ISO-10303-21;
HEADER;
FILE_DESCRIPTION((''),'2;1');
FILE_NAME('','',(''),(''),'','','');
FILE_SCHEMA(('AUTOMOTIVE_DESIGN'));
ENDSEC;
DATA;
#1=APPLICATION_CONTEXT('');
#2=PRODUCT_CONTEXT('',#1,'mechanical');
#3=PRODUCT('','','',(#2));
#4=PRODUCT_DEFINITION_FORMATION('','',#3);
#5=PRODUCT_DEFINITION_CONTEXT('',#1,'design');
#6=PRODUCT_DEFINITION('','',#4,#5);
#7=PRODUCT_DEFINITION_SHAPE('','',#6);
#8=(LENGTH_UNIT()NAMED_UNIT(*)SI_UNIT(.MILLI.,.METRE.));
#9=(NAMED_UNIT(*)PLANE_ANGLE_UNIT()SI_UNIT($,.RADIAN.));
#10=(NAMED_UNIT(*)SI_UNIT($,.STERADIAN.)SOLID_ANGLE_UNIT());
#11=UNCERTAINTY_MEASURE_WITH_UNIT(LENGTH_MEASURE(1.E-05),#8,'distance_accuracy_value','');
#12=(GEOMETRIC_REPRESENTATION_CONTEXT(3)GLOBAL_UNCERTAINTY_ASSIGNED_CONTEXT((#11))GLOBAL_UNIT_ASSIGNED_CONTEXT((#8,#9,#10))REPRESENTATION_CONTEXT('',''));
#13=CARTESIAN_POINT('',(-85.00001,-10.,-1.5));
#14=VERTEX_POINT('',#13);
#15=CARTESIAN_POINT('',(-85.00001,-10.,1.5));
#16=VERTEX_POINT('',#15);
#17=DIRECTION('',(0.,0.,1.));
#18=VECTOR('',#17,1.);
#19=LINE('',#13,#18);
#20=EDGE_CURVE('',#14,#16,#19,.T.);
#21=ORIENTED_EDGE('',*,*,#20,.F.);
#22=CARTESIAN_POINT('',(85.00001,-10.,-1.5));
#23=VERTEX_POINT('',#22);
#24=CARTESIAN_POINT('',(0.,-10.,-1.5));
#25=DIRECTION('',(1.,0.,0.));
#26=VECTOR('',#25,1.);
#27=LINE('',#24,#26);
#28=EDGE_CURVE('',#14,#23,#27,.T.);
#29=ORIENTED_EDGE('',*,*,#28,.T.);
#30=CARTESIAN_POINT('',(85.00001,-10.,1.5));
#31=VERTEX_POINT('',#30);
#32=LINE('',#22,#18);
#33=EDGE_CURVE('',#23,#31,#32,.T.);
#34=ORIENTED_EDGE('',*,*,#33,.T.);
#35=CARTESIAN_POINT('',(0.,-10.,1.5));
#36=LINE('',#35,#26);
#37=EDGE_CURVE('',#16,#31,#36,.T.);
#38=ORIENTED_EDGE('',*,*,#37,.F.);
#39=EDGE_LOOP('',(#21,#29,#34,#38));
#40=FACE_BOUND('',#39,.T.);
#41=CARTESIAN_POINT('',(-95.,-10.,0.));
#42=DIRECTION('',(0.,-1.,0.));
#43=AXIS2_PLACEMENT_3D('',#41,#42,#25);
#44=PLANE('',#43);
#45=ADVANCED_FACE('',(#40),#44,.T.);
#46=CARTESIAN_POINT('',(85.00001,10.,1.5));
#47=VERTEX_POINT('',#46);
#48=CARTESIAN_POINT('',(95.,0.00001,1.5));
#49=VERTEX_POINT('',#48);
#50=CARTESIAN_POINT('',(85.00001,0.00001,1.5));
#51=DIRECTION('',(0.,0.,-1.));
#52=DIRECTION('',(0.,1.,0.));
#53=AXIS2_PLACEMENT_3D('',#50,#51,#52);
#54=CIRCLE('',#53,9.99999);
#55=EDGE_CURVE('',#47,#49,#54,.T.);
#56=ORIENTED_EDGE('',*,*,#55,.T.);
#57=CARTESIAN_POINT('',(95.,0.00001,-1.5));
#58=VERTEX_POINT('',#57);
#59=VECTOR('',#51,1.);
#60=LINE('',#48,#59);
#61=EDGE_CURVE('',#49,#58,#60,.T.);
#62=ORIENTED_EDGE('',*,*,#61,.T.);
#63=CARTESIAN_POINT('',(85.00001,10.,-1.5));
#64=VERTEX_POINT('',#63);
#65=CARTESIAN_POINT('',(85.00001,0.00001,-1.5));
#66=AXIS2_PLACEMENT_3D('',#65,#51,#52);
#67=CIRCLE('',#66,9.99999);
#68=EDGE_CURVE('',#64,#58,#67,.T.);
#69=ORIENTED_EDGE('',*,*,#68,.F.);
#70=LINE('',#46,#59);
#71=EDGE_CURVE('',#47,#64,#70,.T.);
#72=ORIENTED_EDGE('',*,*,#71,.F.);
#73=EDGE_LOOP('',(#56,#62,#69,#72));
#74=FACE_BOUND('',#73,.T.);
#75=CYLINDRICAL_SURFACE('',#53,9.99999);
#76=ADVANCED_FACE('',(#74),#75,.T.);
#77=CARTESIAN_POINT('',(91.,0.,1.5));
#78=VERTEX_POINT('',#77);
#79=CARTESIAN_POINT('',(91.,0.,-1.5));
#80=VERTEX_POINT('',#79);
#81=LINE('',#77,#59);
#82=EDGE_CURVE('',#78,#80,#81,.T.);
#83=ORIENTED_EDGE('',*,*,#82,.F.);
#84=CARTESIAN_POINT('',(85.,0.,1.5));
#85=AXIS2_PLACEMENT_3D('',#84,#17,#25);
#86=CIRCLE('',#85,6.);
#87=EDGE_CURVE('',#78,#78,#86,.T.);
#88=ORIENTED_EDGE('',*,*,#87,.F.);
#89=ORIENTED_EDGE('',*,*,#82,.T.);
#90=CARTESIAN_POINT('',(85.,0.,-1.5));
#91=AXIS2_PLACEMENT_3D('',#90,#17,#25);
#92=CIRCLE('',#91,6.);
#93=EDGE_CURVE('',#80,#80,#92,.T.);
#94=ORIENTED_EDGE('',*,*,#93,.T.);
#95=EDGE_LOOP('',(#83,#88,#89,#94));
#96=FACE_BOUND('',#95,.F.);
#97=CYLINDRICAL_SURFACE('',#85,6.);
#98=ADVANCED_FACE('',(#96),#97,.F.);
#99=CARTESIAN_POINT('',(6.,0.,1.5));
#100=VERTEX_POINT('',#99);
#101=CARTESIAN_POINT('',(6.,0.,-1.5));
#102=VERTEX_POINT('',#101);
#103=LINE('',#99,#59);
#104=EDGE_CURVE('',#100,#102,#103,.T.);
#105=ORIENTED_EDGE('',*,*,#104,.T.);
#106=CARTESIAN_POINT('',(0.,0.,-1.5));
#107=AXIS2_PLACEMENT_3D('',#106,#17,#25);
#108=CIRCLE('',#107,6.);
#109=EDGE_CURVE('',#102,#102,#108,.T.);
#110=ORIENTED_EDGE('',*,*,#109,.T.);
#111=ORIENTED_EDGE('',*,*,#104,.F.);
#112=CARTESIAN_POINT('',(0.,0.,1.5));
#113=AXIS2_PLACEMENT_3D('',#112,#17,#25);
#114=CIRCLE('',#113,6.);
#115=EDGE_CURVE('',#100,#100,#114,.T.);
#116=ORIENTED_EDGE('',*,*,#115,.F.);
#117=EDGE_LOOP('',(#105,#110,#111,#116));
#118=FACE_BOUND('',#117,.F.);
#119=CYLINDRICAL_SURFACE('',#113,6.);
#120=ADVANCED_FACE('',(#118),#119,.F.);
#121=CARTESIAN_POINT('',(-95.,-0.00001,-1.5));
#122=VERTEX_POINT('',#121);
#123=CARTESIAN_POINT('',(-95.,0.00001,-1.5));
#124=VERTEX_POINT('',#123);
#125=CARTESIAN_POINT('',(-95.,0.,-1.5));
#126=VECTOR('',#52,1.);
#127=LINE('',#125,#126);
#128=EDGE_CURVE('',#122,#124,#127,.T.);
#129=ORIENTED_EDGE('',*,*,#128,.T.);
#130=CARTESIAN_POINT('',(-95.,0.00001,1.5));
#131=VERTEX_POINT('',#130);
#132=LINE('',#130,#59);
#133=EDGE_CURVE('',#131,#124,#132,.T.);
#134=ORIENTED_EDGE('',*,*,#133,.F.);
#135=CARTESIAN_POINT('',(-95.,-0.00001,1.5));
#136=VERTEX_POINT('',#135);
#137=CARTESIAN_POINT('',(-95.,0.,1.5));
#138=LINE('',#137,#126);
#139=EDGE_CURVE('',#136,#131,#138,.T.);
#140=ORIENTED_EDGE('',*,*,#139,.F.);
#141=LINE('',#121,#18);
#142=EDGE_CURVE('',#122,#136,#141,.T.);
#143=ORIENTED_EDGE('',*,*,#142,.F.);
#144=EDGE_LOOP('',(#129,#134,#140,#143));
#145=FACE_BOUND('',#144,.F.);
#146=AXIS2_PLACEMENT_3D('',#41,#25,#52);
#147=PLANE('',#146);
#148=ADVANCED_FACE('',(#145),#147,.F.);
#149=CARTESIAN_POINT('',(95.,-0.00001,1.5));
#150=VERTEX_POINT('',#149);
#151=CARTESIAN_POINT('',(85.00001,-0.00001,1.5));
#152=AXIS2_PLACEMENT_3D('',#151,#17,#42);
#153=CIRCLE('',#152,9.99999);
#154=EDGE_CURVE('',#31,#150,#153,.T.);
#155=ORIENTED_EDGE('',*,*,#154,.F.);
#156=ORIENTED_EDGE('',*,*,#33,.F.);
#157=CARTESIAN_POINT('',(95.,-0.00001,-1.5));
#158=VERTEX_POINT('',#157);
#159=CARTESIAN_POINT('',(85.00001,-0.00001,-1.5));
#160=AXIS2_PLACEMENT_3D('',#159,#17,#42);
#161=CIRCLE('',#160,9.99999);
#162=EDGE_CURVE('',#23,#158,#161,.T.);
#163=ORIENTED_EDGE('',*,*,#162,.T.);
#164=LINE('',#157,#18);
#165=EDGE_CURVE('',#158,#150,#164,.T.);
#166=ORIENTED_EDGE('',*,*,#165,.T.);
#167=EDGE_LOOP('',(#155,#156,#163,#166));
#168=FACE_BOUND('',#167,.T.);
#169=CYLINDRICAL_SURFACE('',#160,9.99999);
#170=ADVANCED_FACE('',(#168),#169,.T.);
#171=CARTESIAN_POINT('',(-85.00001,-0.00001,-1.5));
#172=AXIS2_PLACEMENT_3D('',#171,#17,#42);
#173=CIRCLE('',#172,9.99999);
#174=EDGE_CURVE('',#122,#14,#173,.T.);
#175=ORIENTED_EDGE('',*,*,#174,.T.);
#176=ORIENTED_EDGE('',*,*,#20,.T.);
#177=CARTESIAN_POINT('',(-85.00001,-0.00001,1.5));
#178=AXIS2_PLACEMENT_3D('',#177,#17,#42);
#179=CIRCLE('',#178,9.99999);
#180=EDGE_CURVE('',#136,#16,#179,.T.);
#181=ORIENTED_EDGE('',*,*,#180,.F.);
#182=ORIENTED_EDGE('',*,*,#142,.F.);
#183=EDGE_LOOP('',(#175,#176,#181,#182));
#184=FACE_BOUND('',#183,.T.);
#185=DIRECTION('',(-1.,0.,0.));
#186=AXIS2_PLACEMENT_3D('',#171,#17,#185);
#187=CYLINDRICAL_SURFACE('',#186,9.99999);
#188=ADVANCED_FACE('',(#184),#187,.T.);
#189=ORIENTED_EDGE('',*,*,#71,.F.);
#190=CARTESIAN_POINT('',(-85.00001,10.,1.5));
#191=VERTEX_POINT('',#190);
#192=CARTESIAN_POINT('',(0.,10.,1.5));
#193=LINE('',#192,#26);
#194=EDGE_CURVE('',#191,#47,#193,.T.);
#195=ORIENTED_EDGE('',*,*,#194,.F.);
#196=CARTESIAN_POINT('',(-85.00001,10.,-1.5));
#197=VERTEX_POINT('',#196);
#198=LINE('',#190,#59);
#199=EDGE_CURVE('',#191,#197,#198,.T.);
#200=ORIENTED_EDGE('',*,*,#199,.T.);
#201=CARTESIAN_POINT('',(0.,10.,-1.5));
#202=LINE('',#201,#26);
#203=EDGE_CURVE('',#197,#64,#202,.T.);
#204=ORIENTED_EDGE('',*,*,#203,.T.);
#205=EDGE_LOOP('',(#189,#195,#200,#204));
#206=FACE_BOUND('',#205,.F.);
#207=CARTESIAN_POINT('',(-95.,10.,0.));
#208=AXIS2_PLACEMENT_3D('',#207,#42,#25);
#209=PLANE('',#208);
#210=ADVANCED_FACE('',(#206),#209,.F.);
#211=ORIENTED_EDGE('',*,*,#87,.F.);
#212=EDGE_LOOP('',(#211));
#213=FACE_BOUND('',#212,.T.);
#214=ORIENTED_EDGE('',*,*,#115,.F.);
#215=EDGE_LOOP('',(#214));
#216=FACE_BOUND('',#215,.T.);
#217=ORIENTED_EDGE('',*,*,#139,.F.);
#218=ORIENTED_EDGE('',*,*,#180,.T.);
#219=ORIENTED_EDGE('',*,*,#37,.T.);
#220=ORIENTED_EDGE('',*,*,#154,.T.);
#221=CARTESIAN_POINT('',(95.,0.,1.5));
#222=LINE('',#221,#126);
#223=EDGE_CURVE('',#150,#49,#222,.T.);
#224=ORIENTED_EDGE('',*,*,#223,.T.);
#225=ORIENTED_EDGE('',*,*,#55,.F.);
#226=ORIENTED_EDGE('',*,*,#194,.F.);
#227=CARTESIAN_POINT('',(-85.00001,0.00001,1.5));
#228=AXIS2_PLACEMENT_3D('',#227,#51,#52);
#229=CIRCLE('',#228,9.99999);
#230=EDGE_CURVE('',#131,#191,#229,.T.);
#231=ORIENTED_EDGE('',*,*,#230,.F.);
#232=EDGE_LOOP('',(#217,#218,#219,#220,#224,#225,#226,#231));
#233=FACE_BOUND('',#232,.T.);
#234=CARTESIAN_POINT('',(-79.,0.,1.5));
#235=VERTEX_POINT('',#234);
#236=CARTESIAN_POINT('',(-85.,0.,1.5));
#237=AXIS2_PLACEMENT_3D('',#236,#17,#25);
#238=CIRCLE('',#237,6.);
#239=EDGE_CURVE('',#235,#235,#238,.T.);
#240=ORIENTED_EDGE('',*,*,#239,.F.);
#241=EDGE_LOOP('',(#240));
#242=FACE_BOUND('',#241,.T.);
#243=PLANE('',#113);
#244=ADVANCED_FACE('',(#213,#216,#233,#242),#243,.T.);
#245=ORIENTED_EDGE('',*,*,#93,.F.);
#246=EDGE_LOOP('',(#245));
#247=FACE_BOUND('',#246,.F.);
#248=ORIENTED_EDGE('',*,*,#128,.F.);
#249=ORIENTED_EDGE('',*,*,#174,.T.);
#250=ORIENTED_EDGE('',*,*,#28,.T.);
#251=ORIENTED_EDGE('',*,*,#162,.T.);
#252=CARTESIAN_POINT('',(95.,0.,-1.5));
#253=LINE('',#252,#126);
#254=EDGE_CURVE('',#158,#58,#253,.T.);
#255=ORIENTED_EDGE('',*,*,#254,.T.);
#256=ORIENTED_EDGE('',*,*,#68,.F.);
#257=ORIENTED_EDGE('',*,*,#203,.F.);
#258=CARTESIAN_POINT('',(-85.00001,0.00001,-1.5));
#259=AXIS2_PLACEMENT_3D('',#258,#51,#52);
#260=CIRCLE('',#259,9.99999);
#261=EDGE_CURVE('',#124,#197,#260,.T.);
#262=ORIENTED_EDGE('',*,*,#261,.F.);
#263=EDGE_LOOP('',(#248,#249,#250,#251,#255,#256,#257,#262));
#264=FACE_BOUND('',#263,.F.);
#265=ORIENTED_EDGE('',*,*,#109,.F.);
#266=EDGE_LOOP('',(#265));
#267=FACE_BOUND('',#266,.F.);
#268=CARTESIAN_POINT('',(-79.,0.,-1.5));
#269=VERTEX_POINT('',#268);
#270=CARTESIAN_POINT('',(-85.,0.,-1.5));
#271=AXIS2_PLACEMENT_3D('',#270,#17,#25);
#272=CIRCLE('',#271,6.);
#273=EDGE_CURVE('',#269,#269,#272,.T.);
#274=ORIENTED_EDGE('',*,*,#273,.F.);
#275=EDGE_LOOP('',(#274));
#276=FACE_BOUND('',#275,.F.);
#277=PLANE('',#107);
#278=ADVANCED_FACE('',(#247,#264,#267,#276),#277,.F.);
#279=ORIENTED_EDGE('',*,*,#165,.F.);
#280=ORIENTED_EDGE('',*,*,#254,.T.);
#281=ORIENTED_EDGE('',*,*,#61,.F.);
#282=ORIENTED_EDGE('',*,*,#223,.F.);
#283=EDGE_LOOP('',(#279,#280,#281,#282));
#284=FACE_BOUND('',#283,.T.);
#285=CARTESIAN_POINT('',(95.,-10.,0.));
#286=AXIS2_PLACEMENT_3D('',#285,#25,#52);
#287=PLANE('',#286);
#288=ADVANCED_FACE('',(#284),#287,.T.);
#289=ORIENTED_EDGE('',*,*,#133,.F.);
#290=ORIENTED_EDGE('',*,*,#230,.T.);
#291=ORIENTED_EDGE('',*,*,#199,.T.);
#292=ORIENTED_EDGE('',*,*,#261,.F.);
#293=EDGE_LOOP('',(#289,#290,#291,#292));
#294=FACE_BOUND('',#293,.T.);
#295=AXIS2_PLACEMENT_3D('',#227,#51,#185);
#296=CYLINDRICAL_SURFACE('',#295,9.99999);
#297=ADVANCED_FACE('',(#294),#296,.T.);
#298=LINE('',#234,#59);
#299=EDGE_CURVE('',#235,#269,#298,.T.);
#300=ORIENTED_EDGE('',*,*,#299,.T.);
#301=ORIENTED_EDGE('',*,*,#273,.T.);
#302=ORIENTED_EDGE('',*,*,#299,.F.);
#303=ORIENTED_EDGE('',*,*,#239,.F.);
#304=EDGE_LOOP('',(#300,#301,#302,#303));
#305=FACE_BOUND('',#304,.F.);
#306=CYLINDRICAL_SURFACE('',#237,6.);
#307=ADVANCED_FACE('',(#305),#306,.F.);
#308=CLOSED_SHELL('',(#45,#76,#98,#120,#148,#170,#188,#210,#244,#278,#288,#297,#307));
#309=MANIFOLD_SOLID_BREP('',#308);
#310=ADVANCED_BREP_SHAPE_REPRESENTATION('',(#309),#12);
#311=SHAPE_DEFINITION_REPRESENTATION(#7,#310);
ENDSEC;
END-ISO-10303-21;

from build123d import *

# Parameters (mm, degrees)
F0_W     = 190
F0_H     = 20
F1_DEPTH = 1.5
F2_R     = 6
F3_DEPTH = 3.001
F4_R     = 6
F5_DEPTH = 3.001
F6_R     = 9.99999


# Not quite as in the source:
# - a fillet or chamfer is up to 0.001 mm smaller than in the source, because OpenCascade refuses the exact size


with BuildPart() as f1:
    # F0 (on Top) → F1 (new body, symmetric)
    with BuildSketch(Plane.XY):
        Rectangle(F0_W, F0_H)
    extrude(amount=F1_DEPTH, both=True)

    # F2 (on face) → F3 (cut, through all)
    with BuildSketch(Plane.XY.offset(1.5)):
        with Locations((-85, 0)):
            Circle(F2_R)
        with Locations((85, 0)):
            Circle(F2_R)
    extrude(amount=-F3_DEPTH, mode=Mode.SUBTRACT)

    # F4 (on face) → F5 (cut, through all)
    with BuildSketch(Plane.XY.offset(1.5)):
        Circle(F4_R)
    extrude(amount=-F5_DEPTH, mode=Mode.SUBTRACT)

    # F6 (radius 10 in the source; OpenCascade refuses exactly that, so slightly less here)
    f6_edges = [f1.edges().sort_by_distance(p)[0] for p in [
        (-95, -10, 0),
        (-95, 10, 0),
        (95, -10, 0),
        (95, 10, 0),
    ]]
    fillet(f6_edges, radius=F6_R)


solid = f1.part
